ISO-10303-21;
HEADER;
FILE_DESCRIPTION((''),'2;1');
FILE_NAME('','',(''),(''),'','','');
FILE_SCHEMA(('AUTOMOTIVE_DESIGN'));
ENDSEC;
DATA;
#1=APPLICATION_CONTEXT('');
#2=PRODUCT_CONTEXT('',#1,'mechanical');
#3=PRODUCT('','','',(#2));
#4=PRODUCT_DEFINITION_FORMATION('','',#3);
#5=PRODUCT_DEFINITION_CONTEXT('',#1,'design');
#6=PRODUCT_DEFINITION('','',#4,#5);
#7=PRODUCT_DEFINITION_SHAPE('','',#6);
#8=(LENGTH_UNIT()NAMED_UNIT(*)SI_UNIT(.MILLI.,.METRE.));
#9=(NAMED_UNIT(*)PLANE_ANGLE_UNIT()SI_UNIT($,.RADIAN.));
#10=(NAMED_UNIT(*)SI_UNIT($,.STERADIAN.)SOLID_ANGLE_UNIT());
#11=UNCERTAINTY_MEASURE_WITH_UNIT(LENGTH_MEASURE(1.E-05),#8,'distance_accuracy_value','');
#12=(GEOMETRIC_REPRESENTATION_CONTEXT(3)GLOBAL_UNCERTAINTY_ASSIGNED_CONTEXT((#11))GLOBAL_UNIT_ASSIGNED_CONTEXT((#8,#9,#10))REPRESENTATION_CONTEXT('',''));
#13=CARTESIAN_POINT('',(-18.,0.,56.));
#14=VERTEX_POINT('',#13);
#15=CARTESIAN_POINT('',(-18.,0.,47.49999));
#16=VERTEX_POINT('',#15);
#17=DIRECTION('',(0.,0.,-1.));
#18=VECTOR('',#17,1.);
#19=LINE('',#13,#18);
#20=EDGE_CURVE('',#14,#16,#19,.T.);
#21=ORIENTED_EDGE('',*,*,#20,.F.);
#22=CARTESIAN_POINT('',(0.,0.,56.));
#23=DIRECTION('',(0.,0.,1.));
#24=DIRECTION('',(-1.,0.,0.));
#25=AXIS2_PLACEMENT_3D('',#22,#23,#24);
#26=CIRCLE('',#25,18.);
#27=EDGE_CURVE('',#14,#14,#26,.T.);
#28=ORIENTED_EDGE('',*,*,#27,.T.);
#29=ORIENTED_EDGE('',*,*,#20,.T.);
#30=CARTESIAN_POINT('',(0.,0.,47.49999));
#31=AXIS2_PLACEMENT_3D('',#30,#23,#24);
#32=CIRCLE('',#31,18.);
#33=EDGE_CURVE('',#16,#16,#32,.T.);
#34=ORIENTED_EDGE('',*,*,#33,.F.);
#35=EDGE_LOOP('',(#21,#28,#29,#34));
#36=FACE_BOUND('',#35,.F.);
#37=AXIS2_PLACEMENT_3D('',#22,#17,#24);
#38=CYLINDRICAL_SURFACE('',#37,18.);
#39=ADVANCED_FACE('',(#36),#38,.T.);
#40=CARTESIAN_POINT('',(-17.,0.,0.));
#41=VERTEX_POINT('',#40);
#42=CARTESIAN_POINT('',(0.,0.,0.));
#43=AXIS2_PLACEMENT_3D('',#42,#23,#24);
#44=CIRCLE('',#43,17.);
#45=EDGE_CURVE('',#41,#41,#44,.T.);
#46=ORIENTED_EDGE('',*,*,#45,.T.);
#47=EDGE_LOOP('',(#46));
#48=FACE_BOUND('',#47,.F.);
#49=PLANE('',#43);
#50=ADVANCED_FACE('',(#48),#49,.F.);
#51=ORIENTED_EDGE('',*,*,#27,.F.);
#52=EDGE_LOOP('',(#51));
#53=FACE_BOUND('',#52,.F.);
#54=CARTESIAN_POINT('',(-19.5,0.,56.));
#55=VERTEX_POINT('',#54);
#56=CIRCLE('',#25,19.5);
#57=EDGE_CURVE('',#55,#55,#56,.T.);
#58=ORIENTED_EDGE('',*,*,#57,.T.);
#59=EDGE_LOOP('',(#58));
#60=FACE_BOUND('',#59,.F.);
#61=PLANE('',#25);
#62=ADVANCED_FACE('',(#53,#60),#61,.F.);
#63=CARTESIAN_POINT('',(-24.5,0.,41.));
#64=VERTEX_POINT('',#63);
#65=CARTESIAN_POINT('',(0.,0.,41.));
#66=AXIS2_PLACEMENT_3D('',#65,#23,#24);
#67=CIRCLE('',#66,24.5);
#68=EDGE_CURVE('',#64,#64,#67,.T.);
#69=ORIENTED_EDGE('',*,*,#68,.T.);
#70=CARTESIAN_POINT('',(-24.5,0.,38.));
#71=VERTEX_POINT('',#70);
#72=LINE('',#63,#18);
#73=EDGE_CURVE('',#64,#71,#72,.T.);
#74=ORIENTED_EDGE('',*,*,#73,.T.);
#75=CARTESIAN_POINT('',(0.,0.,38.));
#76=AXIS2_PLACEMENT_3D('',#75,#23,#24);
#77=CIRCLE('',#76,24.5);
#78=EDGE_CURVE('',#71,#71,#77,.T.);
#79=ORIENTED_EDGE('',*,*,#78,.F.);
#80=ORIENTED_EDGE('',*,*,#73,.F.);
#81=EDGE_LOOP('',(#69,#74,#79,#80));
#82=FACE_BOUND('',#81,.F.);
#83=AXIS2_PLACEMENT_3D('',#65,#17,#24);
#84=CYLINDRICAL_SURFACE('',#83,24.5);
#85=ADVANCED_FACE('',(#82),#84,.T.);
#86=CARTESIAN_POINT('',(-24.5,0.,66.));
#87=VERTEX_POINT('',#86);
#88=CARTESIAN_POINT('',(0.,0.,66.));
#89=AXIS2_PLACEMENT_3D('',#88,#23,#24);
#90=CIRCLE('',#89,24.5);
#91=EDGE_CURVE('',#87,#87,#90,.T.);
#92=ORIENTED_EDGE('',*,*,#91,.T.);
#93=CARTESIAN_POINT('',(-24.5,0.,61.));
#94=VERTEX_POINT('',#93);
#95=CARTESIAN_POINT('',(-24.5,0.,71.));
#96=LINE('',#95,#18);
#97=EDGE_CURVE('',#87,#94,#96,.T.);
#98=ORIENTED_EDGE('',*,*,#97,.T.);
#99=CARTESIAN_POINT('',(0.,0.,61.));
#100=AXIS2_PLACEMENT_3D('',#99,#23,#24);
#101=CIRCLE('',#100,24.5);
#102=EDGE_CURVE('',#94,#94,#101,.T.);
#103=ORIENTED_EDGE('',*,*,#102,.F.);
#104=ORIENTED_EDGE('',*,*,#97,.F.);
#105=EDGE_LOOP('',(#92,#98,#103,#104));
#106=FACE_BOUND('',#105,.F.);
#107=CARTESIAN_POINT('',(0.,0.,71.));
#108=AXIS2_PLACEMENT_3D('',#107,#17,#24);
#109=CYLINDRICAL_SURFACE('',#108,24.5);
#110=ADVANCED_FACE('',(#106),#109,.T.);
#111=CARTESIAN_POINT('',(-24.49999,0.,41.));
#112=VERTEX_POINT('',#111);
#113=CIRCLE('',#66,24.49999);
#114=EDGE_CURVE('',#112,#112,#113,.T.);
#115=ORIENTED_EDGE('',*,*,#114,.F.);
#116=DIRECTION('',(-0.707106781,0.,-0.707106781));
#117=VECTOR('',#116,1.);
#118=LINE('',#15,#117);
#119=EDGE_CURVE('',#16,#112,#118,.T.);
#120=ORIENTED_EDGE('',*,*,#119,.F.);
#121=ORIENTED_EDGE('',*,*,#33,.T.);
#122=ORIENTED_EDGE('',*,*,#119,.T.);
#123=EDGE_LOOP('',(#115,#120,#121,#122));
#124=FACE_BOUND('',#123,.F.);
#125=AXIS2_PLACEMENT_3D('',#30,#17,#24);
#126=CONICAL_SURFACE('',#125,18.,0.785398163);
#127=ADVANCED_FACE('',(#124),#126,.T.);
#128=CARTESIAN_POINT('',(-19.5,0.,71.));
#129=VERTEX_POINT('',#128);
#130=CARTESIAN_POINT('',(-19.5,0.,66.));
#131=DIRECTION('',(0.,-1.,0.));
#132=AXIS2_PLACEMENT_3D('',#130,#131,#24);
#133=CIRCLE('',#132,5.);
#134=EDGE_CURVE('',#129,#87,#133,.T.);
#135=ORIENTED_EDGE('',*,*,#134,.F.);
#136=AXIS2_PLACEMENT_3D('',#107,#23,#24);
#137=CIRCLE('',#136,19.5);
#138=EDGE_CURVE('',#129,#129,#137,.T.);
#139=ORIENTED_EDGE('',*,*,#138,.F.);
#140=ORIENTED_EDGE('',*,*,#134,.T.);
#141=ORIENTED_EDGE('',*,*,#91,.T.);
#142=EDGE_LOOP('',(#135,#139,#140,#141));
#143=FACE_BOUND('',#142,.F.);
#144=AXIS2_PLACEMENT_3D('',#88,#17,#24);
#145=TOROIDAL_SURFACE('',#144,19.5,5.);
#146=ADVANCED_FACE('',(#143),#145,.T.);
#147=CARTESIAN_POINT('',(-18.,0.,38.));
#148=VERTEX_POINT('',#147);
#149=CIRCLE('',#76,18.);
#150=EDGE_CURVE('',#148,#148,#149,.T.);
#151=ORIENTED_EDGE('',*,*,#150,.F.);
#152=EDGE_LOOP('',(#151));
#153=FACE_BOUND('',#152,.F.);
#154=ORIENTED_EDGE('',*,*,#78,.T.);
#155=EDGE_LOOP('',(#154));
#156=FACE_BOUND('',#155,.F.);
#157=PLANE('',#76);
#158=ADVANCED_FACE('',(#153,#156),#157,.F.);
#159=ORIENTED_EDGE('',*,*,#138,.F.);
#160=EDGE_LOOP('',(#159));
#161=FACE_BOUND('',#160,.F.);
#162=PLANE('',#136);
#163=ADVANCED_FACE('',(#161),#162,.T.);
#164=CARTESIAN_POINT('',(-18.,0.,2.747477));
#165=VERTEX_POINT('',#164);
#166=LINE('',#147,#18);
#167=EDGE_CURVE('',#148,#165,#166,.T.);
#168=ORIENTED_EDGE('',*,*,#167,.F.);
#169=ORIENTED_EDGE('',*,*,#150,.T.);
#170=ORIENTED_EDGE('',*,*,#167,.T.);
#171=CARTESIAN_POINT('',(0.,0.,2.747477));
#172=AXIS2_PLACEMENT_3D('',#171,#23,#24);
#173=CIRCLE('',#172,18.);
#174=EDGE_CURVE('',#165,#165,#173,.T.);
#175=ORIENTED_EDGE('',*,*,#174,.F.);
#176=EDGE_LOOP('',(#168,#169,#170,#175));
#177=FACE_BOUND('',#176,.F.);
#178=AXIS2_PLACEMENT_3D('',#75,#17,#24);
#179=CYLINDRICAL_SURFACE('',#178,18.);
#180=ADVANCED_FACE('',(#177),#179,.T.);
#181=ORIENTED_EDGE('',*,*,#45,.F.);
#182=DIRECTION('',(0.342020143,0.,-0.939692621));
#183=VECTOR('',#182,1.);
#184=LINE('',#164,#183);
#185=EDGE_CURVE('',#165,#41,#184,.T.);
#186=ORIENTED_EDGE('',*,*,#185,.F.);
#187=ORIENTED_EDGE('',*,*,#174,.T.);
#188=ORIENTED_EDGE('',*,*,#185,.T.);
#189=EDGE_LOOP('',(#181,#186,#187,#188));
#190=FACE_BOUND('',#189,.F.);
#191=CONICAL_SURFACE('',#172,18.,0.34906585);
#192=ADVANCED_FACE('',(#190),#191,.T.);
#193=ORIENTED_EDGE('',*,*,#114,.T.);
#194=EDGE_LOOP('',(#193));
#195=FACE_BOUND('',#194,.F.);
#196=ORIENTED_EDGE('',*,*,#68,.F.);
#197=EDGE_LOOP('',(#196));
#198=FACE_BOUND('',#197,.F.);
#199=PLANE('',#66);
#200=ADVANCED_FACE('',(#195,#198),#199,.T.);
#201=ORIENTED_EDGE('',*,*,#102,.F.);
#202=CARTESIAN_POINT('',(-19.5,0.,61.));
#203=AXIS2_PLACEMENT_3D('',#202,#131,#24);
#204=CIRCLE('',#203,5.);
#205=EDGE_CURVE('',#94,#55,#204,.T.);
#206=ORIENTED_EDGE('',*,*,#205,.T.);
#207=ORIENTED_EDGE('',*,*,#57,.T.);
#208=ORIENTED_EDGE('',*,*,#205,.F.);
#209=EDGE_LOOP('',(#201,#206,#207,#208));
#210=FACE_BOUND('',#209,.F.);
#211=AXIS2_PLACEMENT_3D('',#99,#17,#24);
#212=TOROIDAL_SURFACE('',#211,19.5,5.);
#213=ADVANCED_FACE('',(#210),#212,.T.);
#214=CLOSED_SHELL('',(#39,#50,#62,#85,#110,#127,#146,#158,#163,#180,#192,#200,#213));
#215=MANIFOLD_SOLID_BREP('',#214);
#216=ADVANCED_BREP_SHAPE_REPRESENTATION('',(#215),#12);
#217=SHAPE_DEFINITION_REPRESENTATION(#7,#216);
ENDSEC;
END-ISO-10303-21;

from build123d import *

# Parameters (mm, degrees)
F2_R     = 5
F3_SIZE  = 6.49999
F4_SIZE2 = 1
F4_SIZE  = 2.7474774195


# Not quite as in the source:
# - a fillet or chamfer is up to 0.001 mm smaller than in the source, because OpenCascade refuses the exact size


with BuildPart() as f1:
    # F0 (on Front) → F1 (revolve)
    with BuildSketch(Plane.XZ):
        Polygon((-18, 0), (0, 0), (0, 71), (-24.5, 71), (-24.5, 56), (-18, 56), (-18, 41), (-24.5, 41), (-24.5, 38), (-18, 38), align=None)
    revolve(axis=Axis((0, 0, 35.5), (0, 0, 1)))

    # F2
    f2_edges = [f1.edges().sort_by_distance(p)[0] for p in [
        (24.5, 0, 56),
        (24.5, 0, 71),
    ]]
    fillet(f2_edges, radius=F2_R)

    # F3 (size 6.5 in the source; OpenCascade refuses exactly that, so slightly less here)
    f3_edges = [f1.edges().sort_by_distance(p)[0] for p in [
        (18, 0, 41),
    ]]
    chamfer(f3_edges, length=F3_SIZE)

    # F4
    f4_edges = [f1.edges().sort_by_distance(p)[0] for p in [
        (18, 0, 0),
    ]]
    f4_side = f1.faces().sort_by_distance((18, 0, 19))[0]
    chamfer(f4_edges, length=F4_SIZE, length2=F4_SIZE2, reference=f4_side)


solid = f1.part
